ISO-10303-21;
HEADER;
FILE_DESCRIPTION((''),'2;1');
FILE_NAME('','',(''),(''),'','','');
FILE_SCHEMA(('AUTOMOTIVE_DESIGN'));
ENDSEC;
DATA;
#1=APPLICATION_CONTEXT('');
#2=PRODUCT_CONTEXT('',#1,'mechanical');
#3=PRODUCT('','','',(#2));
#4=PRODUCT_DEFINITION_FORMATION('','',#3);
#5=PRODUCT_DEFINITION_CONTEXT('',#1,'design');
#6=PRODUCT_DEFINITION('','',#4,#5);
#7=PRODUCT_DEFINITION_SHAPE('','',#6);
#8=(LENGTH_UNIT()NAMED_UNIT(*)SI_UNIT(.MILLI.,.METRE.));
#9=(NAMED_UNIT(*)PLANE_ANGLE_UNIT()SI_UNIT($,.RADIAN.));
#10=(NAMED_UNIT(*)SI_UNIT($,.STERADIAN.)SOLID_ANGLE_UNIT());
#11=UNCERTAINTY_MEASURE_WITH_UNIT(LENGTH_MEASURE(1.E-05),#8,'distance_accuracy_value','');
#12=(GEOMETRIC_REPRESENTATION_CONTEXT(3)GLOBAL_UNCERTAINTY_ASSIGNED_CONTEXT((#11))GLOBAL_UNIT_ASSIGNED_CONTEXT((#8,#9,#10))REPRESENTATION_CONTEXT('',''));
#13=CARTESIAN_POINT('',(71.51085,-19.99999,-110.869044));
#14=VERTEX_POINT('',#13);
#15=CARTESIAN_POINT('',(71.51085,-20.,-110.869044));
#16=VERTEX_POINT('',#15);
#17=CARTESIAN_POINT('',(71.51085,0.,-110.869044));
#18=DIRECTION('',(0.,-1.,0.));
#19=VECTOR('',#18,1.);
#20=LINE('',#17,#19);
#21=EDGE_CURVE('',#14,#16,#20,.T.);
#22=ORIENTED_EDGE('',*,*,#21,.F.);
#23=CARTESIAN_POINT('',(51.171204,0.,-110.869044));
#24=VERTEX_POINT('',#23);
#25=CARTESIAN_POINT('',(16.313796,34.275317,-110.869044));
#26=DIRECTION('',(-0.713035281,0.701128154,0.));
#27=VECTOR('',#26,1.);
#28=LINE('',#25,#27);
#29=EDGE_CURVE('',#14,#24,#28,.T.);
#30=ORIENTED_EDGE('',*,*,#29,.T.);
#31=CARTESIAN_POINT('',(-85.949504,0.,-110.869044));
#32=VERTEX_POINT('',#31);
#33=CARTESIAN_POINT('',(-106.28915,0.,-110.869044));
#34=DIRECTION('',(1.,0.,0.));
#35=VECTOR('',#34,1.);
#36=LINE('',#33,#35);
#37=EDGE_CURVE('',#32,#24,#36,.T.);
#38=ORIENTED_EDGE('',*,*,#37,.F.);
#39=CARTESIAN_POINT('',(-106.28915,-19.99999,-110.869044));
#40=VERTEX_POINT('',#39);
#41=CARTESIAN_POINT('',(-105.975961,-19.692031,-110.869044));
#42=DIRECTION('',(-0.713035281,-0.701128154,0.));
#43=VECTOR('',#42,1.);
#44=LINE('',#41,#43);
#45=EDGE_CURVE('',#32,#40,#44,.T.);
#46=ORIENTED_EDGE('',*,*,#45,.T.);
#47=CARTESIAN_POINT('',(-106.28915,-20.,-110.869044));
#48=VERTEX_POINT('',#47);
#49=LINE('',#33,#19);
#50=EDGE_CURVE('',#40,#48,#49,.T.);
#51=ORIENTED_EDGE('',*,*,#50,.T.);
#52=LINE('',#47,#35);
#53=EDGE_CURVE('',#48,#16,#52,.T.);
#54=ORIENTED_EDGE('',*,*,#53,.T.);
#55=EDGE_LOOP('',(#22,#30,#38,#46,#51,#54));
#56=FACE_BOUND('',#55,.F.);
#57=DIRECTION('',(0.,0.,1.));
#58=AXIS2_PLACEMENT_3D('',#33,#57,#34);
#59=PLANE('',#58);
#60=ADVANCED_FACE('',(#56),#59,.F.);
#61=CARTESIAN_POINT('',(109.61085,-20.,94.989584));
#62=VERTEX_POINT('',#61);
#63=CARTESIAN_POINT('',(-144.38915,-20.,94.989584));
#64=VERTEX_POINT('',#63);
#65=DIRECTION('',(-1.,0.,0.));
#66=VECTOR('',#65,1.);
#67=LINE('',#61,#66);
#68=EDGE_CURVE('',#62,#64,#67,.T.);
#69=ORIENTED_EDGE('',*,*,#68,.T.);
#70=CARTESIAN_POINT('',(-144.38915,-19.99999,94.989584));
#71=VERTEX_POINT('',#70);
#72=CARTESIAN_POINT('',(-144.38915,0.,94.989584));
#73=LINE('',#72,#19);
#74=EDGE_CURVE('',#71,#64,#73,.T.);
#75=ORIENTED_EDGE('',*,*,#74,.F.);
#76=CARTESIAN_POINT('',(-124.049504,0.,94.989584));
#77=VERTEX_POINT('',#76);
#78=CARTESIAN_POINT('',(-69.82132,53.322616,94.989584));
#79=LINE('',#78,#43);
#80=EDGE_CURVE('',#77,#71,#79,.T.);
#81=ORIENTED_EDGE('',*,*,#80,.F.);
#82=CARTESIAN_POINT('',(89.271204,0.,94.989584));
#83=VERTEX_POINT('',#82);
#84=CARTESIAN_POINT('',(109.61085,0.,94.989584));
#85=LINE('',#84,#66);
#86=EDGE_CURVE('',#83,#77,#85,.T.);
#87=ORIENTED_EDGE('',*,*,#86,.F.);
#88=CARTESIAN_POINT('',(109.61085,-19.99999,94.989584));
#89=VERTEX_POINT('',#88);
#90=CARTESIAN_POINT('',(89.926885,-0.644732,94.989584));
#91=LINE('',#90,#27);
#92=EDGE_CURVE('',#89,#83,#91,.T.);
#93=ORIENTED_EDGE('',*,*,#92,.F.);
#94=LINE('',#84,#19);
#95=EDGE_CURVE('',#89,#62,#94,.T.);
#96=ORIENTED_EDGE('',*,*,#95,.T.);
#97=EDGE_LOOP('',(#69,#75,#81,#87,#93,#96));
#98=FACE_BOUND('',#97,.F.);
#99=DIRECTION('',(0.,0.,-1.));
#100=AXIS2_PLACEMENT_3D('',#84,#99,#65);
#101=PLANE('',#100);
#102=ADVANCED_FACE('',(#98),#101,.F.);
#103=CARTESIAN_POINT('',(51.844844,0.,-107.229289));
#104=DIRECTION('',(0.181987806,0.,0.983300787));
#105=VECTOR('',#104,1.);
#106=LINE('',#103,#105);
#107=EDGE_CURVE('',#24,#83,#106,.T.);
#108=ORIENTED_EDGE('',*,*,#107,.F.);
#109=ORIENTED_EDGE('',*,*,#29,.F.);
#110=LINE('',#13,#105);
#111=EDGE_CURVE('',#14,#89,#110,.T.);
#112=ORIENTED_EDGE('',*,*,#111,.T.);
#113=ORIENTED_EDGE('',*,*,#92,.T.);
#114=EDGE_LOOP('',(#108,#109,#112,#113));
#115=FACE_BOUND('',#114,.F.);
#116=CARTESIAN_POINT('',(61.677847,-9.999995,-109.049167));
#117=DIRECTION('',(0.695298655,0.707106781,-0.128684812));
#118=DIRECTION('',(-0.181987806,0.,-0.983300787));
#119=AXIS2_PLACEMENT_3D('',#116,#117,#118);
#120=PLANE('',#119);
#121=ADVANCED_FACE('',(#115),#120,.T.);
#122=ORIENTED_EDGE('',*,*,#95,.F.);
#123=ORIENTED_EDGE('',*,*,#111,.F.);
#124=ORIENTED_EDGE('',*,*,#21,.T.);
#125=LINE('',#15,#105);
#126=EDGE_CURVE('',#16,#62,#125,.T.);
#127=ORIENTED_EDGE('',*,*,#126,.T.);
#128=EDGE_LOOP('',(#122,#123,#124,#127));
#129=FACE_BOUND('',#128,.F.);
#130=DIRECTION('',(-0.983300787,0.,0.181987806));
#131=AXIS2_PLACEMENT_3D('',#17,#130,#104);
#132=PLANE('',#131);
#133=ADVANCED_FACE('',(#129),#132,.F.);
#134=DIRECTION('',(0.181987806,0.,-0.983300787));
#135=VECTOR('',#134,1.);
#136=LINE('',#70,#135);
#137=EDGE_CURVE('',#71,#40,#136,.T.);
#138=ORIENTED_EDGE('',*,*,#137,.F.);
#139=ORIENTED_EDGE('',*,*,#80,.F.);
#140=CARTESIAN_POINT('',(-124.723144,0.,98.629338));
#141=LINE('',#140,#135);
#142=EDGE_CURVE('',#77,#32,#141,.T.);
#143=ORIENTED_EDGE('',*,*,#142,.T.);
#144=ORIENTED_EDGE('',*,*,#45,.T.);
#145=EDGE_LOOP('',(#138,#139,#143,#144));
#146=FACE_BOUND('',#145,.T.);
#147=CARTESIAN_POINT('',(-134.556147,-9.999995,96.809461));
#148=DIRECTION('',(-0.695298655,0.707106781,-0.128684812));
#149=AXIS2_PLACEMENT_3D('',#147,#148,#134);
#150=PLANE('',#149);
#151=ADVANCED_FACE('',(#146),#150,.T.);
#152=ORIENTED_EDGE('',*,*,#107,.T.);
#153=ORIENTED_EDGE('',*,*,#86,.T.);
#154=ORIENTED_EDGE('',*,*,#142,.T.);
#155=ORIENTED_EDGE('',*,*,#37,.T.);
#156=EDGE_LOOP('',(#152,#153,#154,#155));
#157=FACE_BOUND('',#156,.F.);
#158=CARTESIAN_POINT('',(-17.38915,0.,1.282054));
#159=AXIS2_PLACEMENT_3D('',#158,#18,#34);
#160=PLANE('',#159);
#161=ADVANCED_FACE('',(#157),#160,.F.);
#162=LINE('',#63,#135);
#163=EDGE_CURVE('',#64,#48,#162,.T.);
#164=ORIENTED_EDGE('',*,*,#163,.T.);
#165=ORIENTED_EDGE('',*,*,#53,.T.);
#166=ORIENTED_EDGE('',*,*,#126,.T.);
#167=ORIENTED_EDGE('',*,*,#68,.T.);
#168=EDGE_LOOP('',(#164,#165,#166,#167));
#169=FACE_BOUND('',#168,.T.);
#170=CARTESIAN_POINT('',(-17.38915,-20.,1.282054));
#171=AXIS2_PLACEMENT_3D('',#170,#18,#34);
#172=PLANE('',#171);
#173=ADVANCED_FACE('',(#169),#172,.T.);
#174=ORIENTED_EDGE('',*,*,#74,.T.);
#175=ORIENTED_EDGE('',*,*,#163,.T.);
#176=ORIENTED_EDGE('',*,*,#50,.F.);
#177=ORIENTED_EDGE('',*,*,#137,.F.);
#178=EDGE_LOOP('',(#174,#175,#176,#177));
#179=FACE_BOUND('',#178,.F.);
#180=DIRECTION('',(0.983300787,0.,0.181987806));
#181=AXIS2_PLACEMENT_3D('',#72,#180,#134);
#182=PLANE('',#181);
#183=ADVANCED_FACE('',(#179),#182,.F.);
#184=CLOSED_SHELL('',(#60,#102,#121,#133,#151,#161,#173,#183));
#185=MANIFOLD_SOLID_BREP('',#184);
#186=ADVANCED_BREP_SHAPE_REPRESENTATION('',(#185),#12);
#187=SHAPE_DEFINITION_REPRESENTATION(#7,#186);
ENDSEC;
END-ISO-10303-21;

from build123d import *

# Parameters (mm, degrees)
F1_DEPTH = 20
F2_SIZE  = 19.99999
F3_SIZE  = 19.99999


# Not quite as in the source:
# - a fillet or chamfer is up to 0.001 mm smaller than in the source, because OpenCascade refuses the exact size


with BuildPart() as f1:
    # F0 (on Front) → F1 (new body)
    with BuildSketch(Plane.XZ):
        Polygon((-106.2891499103, -110.869043763), (71.5108500897, -110.869043763), (109.6108500897, 94.9895840839), (-144.3891499103, 94.9895840839), align=None)
    extrude(amount=F1_DEPTH)

    # F2 (size 20 in the source; OpenCascade refuses exactly that, so slightly less here)
    f2_edges = [f1.edges().sort_by_distance(p)[0] for p in [
        (90.56085, 0, -7.93973),
    ]]
    chamfer(f2_edges, length=F2_SIZE)

    # F3 (size 20 in the source; OpenCascade refuses exactly that, so slightly less here)
    f3_edges = [f1.edges().sort_by_distance(p)[0] for p in [
        (-125.33915, 0, -7.93973),
    ]]
    chamfer(f3_edges, length=F3_SIZE)


solid = f1.part
